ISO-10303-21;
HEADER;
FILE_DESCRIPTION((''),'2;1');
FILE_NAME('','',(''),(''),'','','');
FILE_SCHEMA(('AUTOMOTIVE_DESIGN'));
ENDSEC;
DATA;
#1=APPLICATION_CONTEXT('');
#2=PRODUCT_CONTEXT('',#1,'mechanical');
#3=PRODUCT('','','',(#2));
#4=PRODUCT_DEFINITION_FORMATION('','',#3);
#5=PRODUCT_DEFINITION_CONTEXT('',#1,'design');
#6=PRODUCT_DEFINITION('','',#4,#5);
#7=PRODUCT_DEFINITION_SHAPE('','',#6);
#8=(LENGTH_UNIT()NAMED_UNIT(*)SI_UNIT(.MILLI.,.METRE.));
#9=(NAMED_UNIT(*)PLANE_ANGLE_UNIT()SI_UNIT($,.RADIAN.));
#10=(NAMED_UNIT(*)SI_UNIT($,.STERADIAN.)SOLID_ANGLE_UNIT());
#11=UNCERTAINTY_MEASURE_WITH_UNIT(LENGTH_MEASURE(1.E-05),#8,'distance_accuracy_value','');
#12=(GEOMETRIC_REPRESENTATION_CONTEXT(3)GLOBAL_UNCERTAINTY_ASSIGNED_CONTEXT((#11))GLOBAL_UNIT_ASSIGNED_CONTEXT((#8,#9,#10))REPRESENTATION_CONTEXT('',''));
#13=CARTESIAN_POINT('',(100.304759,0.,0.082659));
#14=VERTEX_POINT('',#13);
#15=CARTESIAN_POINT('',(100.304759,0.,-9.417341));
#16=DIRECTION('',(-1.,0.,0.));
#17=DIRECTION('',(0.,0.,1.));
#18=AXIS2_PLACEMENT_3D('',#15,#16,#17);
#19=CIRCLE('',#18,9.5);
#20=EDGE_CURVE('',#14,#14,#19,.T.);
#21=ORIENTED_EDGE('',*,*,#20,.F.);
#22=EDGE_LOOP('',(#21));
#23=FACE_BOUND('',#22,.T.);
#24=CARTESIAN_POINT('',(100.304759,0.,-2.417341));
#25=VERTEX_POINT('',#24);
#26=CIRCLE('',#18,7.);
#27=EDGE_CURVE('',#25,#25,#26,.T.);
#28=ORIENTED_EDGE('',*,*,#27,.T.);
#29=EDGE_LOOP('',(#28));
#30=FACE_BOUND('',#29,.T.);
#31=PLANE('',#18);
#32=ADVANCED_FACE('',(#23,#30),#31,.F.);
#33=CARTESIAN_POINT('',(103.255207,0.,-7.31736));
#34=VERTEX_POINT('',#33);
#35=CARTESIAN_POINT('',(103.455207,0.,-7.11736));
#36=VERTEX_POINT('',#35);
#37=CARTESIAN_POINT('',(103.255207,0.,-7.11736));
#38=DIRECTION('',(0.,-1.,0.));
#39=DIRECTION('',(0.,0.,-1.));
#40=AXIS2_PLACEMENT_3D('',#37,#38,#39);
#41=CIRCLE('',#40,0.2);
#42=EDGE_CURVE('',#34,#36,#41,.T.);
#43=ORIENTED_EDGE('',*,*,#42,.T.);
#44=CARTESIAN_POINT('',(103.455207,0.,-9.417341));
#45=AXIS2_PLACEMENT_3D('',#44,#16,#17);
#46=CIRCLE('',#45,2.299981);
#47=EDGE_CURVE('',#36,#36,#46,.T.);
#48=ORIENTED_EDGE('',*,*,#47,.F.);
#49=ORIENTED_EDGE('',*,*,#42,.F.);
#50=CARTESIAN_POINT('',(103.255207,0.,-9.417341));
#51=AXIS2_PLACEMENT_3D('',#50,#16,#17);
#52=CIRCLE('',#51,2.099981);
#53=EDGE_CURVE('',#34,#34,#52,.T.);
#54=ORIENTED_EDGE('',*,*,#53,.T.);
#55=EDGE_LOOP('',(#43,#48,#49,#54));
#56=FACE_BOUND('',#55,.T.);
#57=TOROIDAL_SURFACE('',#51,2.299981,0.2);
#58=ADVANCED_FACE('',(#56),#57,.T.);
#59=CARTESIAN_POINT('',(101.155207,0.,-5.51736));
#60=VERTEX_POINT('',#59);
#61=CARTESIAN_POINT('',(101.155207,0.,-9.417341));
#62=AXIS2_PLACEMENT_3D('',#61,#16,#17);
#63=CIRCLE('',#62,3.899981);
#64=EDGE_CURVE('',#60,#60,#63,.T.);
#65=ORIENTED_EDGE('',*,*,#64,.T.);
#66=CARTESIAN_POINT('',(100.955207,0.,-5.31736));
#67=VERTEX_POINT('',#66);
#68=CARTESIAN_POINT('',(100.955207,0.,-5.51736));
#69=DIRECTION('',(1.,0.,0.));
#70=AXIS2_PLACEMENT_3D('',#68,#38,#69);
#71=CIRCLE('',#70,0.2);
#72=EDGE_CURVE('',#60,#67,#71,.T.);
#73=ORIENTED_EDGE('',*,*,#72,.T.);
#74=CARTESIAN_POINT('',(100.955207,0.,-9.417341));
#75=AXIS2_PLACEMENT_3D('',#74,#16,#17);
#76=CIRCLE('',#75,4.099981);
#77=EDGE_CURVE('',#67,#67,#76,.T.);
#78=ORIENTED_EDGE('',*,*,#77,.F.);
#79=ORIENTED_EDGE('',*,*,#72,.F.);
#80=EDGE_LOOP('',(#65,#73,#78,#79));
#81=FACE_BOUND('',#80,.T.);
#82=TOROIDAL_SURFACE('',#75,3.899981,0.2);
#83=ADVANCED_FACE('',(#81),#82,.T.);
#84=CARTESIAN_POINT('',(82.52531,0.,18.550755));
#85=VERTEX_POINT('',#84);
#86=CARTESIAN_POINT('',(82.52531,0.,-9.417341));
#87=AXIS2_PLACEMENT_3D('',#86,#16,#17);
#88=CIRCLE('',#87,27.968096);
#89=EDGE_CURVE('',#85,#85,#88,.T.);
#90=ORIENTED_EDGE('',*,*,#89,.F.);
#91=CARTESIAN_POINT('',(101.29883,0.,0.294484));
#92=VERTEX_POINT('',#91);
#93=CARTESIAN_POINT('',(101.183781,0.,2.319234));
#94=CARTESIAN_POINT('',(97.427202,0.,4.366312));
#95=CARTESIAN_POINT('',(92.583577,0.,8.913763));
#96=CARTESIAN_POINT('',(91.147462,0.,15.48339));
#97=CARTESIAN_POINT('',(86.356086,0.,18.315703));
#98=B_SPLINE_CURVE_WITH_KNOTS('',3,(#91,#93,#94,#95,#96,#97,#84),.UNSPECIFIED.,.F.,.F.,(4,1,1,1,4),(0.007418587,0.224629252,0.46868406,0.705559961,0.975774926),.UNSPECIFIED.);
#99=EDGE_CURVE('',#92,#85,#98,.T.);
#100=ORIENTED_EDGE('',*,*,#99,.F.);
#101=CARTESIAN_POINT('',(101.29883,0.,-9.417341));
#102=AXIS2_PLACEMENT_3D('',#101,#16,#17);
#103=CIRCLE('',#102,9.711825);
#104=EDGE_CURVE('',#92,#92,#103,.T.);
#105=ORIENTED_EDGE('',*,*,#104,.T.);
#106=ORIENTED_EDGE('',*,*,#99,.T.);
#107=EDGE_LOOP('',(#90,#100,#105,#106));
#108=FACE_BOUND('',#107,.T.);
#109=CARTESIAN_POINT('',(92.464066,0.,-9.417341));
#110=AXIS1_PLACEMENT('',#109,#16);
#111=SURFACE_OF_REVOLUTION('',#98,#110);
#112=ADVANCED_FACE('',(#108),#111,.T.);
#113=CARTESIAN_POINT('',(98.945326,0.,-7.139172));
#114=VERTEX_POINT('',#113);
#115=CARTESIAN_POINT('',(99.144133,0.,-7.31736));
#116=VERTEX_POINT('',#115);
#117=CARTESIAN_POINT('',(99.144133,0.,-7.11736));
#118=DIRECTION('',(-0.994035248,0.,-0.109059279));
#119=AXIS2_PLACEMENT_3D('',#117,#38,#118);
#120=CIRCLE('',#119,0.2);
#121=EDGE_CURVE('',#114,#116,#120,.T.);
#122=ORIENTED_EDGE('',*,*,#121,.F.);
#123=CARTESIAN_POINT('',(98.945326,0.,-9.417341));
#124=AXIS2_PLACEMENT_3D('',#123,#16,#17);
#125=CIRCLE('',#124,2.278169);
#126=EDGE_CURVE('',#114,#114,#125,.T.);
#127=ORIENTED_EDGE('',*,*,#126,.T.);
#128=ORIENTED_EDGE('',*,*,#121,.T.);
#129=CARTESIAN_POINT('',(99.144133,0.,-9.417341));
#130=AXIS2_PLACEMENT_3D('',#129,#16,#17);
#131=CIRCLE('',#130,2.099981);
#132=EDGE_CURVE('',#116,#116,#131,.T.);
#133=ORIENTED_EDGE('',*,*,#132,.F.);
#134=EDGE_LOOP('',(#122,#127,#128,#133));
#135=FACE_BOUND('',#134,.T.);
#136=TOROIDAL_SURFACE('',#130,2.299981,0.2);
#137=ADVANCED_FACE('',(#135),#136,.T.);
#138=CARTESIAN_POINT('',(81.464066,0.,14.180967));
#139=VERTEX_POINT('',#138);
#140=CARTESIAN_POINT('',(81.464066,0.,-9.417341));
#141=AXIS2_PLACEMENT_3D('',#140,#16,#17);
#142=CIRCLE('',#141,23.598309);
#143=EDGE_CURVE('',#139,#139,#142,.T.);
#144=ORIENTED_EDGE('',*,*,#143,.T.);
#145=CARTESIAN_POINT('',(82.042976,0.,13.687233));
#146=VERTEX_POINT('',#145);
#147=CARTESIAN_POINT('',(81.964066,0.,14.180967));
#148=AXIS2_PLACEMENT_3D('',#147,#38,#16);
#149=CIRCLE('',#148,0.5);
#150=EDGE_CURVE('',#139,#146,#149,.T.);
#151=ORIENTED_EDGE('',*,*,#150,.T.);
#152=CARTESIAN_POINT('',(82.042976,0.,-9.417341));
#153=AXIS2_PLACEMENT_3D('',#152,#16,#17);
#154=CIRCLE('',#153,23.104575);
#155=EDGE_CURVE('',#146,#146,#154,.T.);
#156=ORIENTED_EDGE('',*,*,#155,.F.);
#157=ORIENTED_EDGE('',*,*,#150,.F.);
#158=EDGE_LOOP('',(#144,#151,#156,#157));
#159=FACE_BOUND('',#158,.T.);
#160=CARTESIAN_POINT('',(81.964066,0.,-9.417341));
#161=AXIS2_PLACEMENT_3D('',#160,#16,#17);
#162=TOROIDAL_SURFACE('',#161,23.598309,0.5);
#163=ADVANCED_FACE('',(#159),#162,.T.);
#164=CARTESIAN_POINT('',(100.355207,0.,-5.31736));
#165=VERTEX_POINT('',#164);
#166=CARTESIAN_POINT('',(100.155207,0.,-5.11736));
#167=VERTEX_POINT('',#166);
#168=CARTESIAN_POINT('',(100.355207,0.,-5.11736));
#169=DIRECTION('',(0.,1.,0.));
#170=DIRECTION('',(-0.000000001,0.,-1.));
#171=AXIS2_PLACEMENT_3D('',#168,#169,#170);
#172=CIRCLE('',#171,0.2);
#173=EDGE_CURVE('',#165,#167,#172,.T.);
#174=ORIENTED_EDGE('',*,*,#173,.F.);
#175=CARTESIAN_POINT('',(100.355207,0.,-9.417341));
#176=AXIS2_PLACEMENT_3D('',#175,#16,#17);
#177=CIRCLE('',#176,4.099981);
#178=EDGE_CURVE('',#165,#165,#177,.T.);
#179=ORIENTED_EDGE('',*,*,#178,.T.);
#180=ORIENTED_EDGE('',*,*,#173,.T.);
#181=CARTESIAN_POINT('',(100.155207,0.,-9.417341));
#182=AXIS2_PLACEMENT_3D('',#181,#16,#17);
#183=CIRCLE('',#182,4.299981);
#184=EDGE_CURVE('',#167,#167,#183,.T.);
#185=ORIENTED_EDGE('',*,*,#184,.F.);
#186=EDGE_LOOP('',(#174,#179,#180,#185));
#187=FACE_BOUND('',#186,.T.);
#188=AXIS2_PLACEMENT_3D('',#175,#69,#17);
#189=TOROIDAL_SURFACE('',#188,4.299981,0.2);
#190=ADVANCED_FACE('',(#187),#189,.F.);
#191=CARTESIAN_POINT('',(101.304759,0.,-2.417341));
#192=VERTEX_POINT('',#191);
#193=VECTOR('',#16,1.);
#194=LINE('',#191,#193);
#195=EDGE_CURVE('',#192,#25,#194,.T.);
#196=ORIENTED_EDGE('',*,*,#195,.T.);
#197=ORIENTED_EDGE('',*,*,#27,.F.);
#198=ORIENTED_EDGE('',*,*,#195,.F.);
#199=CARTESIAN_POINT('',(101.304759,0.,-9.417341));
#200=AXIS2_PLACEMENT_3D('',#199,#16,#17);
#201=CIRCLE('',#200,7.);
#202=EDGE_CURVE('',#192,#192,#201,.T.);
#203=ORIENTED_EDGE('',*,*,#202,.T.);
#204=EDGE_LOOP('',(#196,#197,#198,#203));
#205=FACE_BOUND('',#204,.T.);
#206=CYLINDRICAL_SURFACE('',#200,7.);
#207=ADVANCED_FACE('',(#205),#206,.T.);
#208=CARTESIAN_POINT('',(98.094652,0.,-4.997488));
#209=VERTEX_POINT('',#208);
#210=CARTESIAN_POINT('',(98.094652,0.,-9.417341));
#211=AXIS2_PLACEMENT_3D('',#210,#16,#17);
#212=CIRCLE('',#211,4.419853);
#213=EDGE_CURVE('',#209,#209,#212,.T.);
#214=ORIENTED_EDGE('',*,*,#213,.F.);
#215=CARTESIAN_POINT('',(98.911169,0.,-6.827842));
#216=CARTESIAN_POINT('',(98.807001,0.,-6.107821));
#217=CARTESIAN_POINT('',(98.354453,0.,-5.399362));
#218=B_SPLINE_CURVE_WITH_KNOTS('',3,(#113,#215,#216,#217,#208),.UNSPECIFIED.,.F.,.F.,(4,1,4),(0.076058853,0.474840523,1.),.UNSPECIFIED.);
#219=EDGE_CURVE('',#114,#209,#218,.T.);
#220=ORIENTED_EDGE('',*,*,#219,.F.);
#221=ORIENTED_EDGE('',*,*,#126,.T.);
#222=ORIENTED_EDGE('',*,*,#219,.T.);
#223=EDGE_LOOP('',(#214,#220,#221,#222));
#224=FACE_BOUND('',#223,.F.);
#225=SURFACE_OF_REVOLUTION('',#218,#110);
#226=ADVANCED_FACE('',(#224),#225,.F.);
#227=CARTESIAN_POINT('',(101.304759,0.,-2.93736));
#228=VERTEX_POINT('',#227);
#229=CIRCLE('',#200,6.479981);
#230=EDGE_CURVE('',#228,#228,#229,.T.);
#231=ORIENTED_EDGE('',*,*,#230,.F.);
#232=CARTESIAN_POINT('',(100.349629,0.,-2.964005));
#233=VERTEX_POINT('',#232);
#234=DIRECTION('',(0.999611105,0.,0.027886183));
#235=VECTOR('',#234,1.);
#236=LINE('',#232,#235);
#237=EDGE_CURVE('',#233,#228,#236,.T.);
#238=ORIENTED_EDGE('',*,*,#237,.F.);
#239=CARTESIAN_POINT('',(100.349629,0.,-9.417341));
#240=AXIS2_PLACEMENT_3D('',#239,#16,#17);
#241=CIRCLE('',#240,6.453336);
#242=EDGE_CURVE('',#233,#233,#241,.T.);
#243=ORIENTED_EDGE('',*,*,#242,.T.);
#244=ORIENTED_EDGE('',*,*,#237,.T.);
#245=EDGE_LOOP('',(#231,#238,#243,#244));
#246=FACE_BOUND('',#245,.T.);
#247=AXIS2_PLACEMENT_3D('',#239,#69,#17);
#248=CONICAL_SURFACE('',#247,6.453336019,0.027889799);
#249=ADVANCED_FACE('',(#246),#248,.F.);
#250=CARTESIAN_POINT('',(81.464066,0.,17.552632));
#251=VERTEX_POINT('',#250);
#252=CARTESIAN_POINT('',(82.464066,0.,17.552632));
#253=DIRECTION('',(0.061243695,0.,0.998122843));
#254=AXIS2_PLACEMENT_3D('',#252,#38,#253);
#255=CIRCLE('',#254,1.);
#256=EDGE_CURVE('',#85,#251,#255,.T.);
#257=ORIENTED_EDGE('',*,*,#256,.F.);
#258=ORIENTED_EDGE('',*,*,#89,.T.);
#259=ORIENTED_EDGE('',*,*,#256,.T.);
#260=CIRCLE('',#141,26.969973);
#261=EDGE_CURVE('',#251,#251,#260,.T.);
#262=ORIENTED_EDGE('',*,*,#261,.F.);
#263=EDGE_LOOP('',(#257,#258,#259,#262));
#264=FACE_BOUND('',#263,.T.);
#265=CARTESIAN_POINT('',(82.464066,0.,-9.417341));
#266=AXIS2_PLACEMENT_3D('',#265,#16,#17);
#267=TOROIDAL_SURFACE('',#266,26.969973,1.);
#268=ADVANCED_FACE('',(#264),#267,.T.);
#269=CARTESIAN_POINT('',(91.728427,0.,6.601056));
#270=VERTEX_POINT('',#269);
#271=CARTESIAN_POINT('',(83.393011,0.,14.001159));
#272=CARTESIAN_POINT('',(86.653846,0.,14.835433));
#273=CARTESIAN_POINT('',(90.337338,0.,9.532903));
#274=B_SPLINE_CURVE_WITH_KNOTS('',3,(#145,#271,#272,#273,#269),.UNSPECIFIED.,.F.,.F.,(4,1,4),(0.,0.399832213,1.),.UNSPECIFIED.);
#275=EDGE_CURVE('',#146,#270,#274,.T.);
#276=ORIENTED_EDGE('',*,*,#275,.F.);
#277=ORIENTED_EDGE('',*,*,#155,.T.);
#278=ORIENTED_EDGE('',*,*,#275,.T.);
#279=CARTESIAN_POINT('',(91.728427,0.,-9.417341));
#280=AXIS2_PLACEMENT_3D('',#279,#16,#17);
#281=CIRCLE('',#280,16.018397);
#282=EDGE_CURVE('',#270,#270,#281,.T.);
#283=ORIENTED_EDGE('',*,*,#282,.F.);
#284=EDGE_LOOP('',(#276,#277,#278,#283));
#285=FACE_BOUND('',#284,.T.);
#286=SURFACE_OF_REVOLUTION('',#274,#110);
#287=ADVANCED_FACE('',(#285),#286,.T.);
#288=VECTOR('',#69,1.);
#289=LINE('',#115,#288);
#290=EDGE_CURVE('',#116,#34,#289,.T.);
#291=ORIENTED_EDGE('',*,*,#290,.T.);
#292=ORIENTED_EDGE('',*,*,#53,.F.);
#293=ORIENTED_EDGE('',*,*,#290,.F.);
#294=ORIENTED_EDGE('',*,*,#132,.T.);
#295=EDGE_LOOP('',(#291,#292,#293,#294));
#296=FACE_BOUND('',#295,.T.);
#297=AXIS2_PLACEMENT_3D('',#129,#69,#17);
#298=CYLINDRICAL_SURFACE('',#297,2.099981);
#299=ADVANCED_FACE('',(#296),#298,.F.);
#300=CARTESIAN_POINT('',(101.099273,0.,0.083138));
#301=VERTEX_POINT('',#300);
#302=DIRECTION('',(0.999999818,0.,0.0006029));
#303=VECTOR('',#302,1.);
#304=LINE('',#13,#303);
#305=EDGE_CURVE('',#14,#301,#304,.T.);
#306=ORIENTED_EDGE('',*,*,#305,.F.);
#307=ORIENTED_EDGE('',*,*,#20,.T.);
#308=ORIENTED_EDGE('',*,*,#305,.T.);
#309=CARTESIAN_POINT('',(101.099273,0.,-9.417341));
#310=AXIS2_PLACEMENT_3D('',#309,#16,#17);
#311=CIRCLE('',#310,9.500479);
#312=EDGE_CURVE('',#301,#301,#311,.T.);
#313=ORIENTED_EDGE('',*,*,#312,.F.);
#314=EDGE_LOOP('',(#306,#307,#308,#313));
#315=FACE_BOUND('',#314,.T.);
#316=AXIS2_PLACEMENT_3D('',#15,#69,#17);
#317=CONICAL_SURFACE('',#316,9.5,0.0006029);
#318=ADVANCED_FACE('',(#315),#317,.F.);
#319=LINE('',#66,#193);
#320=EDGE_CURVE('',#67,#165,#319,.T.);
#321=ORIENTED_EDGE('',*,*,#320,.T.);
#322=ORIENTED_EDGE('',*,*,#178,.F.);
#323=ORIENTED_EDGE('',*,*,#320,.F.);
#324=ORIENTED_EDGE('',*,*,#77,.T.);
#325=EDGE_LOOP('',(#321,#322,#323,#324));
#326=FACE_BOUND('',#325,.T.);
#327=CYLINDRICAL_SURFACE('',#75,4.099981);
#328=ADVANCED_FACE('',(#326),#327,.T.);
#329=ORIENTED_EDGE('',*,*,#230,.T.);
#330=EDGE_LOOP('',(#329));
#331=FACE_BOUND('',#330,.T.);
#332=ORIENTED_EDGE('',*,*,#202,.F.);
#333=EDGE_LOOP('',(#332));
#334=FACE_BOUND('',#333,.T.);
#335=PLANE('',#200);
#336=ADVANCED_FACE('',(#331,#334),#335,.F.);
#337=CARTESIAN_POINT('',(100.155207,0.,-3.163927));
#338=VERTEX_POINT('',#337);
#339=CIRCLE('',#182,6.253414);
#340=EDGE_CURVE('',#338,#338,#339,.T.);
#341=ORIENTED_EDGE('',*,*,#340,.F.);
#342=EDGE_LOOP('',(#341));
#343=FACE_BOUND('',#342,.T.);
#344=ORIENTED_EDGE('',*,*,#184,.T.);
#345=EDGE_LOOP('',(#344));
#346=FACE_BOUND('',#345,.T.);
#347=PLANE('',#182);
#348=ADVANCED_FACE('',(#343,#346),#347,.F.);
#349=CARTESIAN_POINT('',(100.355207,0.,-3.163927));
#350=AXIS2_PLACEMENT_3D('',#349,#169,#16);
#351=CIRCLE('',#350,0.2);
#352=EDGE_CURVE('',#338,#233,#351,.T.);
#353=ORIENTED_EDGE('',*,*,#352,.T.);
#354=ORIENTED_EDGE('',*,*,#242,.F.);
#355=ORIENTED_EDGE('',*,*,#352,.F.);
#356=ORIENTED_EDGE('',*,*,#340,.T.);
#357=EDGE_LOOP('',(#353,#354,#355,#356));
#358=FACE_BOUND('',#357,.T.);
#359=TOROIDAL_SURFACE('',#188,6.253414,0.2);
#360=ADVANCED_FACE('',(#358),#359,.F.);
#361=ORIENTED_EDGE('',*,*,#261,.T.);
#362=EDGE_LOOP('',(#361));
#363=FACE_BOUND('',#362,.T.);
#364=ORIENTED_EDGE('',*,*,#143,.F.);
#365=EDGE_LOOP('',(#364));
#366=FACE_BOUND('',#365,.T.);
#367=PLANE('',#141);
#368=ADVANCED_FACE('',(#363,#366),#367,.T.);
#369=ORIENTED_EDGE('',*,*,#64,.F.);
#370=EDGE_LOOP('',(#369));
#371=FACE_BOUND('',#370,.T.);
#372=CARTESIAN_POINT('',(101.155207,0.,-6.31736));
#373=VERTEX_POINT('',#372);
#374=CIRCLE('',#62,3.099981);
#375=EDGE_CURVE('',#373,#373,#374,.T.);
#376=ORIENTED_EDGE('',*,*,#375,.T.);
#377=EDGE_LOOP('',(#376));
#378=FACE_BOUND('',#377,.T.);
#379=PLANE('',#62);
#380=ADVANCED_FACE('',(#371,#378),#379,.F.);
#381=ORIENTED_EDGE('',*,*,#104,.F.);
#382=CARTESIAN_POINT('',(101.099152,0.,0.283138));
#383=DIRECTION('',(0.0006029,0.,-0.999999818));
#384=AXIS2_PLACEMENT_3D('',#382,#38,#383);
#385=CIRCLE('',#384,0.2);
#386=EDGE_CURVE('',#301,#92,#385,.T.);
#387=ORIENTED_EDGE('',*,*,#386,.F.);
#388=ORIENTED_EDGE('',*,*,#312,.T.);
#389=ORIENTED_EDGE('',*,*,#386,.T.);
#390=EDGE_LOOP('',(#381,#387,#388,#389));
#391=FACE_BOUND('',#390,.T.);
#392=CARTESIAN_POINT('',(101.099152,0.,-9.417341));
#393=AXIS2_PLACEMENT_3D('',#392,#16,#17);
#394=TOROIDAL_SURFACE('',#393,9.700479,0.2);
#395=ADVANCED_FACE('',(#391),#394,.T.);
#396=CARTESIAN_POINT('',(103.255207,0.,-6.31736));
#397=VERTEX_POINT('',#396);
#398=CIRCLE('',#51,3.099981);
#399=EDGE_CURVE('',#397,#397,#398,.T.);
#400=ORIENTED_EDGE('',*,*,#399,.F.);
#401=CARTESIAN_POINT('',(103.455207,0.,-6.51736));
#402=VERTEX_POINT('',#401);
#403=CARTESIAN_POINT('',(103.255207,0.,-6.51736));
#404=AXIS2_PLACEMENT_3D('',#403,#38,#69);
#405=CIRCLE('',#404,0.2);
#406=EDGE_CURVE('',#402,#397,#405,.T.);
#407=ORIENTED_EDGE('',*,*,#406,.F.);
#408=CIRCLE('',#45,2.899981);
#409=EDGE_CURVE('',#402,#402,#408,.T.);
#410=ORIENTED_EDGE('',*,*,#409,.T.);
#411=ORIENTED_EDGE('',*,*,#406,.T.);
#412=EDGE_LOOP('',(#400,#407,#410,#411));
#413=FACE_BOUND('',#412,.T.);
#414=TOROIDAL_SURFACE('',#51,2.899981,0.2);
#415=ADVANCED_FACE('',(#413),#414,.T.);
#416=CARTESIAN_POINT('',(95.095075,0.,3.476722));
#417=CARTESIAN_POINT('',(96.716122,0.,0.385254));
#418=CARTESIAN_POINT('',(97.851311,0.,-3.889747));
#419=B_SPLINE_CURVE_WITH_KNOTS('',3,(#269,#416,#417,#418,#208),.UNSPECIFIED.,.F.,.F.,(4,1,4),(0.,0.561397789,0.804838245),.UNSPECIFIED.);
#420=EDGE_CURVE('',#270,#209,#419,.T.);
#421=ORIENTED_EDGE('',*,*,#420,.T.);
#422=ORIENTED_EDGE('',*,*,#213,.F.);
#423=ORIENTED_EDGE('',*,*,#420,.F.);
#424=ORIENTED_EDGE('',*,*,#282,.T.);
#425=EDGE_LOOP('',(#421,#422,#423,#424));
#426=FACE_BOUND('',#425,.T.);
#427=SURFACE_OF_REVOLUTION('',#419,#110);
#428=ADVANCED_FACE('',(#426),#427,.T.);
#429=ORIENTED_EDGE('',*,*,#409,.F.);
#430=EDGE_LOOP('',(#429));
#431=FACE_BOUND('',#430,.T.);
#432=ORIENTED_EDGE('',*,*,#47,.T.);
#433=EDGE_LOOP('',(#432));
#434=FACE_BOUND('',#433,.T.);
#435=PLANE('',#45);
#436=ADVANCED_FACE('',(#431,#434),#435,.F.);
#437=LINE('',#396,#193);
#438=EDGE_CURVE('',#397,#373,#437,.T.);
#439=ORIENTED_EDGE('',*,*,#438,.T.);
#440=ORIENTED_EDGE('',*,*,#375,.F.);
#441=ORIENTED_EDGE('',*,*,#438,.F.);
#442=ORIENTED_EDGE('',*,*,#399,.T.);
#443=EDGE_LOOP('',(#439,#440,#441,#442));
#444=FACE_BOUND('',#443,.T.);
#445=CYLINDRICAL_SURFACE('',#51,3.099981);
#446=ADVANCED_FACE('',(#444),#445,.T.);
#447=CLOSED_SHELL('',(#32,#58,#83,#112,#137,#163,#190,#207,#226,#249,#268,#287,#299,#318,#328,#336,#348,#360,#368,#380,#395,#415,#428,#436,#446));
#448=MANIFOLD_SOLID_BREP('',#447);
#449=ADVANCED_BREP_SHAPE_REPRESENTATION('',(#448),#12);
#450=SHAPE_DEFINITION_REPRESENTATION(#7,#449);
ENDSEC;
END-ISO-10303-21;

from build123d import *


with BuildPart() as f1:
    # F0 (on Front) → F1 (revolve)
    with BuildSketch(Plane.XZ):
        with BuildLine():
            ThreePointArc((103.2552067209, -7.3173598393), (103.3966280772, -7.2587811955), (103.4552067209, -7.1173598393))
            Line((103.4552067209, -7.1173598393), (103.4552067209, -6.5173598393))
            ThreePointArc((103.4552067209, -6.5173598393), (103.3966280772, -6.3759384831), (103.2552067209, -6.3173598393))
            Line((103.2552067209, -6.3173598393), (101.1552067209, -6.3173598393))
            Line((101.1552067209, -6.3173598393), (101.1552067209, -5.5173598393))
            ThreePointArc((101.1552067209, -5.5173598393), (101.0966280772, -5.3759384831), (100.9552067209, -5.3173598393))
            Line((100.9552067209, -5.3173598393), (100.3552067209, -5.3173598393))
            ThreePointArc((100.3552067209, -5.3173598393), (100.2137853647, -5.2587811955), (100.1552067209, -5.1173598393))
            Line((100.1552067209, -5.1173598393), (100.1552067209, -3.1639273529))
            ThreePointArc((100.1552067209, -3.1639273529), (100.2118270722, -3.0244917895), (100.3496294843, -2.9640051319))
            Line((100.3496294843, -2.9640051319), (101.3047594914, -2.9373598393))
            Line((101.3047594914, -2.9373598393), (101.3047594914, -2.4173411505))
            Line((101.3047594914, -2.4173411505), (100.3047594914, -2.4173411505))
            Line((100.3047594914, -2.4173411505), (100.3047594914, 0.0826588495))
            Line((100.3047594914, 0.0826588495), (101.0992726788, 0.0831378613))
            ThreePointArc((101.0992726788, 0.0831378613), (101.2445709399, 0.1458302845), (101.2988300096, 0.2944838347))
            add(Edge.make_bspline(
                [(101.2988300096, 0.2944838347), (101.1837805651, 2.3192337828), (97.4272016608, 4.3663124435), (92.5835769481, 8.9137634036), (91.1474619441, 15.4833901881), (86.3560860602, 18.3157026115), (82.5253100104, 18.5507547204)],
                knots=[0.0074185875, 0.0074185875, 0.0074185875, 0.0074185875, 0.2246292525, 0.46868406, 0.7055599611, 0.9757749259, 0.9757749259, 0.9757749259, 0.9757749259], degree=3))
            ThreePointArc((82.5253100104, 18.5507547204), (81.7789545345, 18.2810698276), (81.4640663156, 17.5526318774))
            Line((81.4640663156, 17.5526318774), (81.4640663156, 14.1809673676))
            ThreePointArc((81.4640663156, 14.1809673676), (81.6396089198, 13.8005368242), (82.0429759088, 13.6872333541))
            add(Edge.make_bspline(
                [(82.0429759088, 13.6872333541), (83.3930109688, 14.001159411), (86.6538464033, 14.8354332287), (90.3373383246, 9.5329025549), (91.7284265161, 6.6010556184)],
                knots=[0, 0, 0, 0, 0.399832213, 1, 1, 1, 1], degree=3))
            add(Edge.make_bspline(
                [(91.7284265161, 6.6010556184), (95.0950754885, 3.4767219881), (96.7161215521, 0.3852537708), (97.8513108201, -3.8897465019), (98.094652149, -4.9974876869)],
                knots=[0, 0, 0, 0, 0.5613977894, 0.8048382446, 0.8048382446, 0.8048382446, 0.8048382446], degree=3))
            add(Edge.make_bspline(
                [(98.9453257242, -7.1391716953), (98.9111686024, -6.8278420862), (98.8070010851, -6.1078212195), (98.3544529116, -5.3993618529), (98.094652149, -4.9974876869)],
                knots=[0.0760588529, 0.0760588529, 0.0760588529, 0.0760588529, 0.4748405233, 1, 1, 1, 1], degree=3))
            ThreePointArc((98.9453257242, -7.1391716953), (99.0106456417, -7.2662933332), (99.1441327737, -7.3173598393))
            Line((99.1441327737, -7.3173598393), (103.2552067209, -7.3173598393))
        make_face()
    revolve(axis=Axis((92.4640663156, 0, -9.4173411505), (-1, 0, 0)))


solid = f1.part
